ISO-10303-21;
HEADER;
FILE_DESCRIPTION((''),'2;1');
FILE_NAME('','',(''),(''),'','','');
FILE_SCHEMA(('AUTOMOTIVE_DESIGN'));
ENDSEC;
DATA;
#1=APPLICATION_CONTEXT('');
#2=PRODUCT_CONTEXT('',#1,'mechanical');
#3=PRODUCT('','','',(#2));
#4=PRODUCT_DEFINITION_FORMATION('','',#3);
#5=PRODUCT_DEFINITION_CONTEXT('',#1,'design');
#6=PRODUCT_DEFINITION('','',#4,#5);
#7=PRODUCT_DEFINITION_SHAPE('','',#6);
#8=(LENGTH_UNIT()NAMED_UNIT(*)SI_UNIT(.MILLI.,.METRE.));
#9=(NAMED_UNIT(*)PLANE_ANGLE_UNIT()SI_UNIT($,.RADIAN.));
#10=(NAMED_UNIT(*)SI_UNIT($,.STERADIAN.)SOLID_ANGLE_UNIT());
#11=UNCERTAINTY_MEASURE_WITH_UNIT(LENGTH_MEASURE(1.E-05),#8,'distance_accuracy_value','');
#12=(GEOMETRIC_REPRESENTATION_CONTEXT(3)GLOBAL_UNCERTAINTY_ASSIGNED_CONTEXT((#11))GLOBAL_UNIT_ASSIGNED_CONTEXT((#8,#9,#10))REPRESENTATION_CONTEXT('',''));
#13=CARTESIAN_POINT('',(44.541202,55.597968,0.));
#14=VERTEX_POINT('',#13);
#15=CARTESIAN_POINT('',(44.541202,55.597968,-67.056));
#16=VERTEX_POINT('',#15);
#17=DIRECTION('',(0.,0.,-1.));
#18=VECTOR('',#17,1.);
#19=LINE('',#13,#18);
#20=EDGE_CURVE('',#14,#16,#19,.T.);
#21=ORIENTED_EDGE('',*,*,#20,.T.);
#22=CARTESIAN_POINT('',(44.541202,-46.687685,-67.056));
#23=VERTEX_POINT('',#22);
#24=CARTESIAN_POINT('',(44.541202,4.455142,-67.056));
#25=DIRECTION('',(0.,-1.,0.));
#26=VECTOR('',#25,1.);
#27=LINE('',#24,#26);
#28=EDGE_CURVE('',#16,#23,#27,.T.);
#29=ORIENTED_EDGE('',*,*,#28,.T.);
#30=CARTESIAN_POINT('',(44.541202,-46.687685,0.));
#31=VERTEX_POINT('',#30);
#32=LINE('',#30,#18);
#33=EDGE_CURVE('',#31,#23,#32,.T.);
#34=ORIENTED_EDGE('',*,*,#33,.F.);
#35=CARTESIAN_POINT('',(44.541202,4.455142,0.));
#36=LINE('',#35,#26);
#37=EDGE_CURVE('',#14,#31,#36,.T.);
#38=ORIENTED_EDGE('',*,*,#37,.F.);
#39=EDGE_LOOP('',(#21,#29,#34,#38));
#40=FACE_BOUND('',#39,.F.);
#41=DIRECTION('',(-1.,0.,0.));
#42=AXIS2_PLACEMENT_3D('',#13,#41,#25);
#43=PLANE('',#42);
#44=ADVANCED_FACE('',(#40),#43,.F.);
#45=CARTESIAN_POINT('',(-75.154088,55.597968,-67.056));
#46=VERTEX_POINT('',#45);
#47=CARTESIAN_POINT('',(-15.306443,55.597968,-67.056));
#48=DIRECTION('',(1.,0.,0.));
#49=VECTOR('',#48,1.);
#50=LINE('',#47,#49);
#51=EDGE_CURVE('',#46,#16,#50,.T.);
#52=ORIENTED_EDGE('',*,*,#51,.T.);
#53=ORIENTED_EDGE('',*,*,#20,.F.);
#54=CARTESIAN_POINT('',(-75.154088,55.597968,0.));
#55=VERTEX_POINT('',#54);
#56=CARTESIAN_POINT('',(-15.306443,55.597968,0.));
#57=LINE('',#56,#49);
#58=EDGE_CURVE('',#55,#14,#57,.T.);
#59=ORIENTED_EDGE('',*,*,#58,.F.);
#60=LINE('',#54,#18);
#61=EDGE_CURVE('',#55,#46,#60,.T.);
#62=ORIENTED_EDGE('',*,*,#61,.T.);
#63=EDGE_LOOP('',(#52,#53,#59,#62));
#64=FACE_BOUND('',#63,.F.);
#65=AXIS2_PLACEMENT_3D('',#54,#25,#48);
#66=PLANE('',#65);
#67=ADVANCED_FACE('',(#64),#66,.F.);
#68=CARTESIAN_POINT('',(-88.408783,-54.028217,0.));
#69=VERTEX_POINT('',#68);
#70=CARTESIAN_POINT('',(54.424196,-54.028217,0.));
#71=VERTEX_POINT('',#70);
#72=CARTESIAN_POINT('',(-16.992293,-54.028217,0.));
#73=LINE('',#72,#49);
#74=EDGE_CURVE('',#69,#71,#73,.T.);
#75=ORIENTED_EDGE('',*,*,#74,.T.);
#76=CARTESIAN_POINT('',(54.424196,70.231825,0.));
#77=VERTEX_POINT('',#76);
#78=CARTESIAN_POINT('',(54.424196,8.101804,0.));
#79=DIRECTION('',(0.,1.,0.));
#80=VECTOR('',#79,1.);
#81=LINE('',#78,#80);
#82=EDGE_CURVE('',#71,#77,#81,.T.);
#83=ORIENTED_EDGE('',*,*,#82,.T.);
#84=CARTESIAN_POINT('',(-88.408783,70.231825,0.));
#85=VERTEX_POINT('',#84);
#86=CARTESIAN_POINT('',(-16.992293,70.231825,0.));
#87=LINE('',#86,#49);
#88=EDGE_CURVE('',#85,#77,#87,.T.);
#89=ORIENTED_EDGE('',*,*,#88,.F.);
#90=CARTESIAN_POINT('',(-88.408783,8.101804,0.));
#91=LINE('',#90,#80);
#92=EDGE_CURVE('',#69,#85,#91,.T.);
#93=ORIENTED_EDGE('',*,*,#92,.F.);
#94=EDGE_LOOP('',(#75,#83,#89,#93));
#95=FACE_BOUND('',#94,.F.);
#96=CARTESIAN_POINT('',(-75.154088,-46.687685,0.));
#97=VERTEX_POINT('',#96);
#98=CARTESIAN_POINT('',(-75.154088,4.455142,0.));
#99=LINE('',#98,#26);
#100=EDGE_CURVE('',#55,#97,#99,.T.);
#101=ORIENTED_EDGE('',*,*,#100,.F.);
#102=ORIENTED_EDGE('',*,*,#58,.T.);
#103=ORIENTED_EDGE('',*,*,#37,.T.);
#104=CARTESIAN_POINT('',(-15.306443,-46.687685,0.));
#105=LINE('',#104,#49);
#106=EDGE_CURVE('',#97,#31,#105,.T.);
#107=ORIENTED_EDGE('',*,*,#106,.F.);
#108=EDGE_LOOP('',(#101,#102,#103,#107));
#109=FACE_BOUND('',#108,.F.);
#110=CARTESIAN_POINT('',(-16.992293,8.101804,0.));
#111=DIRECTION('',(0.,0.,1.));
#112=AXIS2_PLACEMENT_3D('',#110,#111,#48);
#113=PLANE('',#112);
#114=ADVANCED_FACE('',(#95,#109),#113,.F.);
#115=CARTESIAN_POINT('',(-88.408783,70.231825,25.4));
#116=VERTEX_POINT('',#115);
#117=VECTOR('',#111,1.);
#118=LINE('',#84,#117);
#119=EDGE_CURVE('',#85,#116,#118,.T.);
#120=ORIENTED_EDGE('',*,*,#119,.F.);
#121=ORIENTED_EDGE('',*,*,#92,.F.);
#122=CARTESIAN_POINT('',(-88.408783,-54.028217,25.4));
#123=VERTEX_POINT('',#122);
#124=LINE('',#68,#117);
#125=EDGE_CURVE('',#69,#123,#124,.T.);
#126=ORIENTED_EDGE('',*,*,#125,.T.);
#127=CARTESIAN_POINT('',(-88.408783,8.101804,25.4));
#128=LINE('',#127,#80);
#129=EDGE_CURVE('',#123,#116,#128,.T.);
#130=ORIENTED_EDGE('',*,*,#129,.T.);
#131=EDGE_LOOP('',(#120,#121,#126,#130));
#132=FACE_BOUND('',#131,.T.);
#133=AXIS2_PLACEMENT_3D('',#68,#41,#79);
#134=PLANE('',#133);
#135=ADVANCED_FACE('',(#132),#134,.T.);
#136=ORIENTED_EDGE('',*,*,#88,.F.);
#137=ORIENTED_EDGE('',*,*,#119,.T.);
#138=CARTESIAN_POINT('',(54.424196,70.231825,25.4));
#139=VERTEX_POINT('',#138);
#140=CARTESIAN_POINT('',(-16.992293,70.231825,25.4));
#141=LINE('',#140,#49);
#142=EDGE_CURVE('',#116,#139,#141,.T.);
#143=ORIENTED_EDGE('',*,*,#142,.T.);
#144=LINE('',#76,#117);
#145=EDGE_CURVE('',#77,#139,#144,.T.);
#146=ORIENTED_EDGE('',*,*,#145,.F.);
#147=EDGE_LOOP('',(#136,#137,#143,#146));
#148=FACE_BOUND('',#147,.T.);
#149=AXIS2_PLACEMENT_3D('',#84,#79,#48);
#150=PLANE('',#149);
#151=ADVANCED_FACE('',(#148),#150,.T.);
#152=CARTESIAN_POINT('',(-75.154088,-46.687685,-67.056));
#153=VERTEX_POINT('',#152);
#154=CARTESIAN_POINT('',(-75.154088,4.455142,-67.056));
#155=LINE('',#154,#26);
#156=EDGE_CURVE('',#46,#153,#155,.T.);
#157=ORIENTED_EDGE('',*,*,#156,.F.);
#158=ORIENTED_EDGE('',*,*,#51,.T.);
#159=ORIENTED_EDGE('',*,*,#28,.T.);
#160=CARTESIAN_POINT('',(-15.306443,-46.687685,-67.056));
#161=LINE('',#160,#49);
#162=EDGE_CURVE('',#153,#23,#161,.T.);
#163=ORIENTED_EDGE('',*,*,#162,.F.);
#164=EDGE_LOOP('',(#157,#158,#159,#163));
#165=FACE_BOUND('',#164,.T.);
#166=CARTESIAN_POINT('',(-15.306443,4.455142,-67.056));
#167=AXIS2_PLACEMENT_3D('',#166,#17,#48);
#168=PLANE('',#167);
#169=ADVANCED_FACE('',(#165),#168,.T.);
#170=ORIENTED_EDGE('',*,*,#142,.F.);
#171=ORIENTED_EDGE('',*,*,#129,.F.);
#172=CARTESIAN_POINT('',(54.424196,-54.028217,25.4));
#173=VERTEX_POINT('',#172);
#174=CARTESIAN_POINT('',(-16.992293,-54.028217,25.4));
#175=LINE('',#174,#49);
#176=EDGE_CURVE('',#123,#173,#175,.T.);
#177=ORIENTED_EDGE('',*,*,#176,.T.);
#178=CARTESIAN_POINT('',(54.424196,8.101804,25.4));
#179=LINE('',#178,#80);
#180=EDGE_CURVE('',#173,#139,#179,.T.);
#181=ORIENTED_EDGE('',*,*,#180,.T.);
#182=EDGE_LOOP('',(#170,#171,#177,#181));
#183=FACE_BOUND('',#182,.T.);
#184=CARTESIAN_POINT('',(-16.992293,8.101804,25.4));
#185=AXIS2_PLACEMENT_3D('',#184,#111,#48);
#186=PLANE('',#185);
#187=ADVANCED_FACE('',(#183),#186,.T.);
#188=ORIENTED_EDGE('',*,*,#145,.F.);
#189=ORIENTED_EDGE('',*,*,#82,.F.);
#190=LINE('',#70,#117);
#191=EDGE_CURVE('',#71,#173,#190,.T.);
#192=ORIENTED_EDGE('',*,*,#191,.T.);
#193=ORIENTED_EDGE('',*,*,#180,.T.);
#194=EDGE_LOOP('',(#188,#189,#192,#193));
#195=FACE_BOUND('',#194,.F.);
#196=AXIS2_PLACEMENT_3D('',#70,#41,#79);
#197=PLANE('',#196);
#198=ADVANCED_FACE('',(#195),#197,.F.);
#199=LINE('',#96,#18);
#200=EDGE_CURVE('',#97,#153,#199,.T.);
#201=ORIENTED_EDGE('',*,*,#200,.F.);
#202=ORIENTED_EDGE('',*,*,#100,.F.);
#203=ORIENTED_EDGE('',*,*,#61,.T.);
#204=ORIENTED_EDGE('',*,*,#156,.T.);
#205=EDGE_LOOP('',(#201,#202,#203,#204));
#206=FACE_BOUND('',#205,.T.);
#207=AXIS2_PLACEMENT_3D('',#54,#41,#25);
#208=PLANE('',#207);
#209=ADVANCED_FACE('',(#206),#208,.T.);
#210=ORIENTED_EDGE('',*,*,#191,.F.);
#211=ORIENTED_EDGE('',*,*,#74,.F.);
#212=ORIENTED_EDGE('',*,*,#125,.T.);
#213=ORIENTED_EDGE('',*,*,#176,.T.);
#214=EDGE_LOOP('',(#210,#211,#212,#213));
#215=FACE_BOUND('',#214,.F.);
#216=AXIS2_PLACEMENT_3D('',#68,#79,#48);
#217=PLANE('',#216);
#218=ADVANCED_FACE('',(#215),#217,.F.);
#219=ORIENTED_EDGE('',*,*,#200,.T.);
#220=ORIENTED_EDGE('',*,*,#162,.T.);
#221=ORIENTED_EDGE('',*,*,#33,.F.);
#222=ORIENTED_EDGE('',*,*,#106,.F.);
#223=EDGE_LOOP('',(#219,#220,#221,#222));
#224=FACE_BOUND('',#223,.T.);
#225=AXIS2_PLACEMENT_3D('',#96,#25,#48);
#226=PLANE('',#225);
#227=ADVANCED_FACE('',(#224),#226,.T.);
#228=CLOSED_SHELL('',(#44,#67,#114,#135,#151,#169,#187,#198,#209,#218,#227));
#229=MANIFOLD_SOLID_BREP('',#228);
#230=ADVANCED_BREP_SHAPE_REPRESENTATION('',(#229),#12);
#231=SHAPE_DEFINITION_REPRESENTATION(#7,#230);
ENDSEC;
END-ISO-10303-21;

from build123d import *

# Parameters (mm, degrees)
F0_W     = 142.8329795599
F0_H     = 124.2600418627
F1_DEPTH = 25.4
F2_W     = 119.6952909231
F2_H     = 102.2856533527
F3_DEPTH = 67.056


# Not quite as in the source:
# - the program builds the solid bodies; features that only make, move or delete a surface that nothing else refers to are left out


with BuildPart() as f1:
    # F0 (on Top) → F1 (new body)
    with BuildSketch(Plane.XY):
        with Locations((-16.9922932982, 8.1018041819)):
            Rectangle(F0_W, F0_H)
    extrude(amount=F1_DEPTH)

    # F2 (on face) → F3 (join)
    with BuildSketch(Plane(origin=(0, 0, 0), x_dir=(1, 0, 0), z_dir=(0, 0, -1))):
        with Locations((-15.306442976, -4.4551417232)):
            Rectangle(F2_W, F2_H)
    extrude(amount=F3_DEPTH)


solid = f1.part
